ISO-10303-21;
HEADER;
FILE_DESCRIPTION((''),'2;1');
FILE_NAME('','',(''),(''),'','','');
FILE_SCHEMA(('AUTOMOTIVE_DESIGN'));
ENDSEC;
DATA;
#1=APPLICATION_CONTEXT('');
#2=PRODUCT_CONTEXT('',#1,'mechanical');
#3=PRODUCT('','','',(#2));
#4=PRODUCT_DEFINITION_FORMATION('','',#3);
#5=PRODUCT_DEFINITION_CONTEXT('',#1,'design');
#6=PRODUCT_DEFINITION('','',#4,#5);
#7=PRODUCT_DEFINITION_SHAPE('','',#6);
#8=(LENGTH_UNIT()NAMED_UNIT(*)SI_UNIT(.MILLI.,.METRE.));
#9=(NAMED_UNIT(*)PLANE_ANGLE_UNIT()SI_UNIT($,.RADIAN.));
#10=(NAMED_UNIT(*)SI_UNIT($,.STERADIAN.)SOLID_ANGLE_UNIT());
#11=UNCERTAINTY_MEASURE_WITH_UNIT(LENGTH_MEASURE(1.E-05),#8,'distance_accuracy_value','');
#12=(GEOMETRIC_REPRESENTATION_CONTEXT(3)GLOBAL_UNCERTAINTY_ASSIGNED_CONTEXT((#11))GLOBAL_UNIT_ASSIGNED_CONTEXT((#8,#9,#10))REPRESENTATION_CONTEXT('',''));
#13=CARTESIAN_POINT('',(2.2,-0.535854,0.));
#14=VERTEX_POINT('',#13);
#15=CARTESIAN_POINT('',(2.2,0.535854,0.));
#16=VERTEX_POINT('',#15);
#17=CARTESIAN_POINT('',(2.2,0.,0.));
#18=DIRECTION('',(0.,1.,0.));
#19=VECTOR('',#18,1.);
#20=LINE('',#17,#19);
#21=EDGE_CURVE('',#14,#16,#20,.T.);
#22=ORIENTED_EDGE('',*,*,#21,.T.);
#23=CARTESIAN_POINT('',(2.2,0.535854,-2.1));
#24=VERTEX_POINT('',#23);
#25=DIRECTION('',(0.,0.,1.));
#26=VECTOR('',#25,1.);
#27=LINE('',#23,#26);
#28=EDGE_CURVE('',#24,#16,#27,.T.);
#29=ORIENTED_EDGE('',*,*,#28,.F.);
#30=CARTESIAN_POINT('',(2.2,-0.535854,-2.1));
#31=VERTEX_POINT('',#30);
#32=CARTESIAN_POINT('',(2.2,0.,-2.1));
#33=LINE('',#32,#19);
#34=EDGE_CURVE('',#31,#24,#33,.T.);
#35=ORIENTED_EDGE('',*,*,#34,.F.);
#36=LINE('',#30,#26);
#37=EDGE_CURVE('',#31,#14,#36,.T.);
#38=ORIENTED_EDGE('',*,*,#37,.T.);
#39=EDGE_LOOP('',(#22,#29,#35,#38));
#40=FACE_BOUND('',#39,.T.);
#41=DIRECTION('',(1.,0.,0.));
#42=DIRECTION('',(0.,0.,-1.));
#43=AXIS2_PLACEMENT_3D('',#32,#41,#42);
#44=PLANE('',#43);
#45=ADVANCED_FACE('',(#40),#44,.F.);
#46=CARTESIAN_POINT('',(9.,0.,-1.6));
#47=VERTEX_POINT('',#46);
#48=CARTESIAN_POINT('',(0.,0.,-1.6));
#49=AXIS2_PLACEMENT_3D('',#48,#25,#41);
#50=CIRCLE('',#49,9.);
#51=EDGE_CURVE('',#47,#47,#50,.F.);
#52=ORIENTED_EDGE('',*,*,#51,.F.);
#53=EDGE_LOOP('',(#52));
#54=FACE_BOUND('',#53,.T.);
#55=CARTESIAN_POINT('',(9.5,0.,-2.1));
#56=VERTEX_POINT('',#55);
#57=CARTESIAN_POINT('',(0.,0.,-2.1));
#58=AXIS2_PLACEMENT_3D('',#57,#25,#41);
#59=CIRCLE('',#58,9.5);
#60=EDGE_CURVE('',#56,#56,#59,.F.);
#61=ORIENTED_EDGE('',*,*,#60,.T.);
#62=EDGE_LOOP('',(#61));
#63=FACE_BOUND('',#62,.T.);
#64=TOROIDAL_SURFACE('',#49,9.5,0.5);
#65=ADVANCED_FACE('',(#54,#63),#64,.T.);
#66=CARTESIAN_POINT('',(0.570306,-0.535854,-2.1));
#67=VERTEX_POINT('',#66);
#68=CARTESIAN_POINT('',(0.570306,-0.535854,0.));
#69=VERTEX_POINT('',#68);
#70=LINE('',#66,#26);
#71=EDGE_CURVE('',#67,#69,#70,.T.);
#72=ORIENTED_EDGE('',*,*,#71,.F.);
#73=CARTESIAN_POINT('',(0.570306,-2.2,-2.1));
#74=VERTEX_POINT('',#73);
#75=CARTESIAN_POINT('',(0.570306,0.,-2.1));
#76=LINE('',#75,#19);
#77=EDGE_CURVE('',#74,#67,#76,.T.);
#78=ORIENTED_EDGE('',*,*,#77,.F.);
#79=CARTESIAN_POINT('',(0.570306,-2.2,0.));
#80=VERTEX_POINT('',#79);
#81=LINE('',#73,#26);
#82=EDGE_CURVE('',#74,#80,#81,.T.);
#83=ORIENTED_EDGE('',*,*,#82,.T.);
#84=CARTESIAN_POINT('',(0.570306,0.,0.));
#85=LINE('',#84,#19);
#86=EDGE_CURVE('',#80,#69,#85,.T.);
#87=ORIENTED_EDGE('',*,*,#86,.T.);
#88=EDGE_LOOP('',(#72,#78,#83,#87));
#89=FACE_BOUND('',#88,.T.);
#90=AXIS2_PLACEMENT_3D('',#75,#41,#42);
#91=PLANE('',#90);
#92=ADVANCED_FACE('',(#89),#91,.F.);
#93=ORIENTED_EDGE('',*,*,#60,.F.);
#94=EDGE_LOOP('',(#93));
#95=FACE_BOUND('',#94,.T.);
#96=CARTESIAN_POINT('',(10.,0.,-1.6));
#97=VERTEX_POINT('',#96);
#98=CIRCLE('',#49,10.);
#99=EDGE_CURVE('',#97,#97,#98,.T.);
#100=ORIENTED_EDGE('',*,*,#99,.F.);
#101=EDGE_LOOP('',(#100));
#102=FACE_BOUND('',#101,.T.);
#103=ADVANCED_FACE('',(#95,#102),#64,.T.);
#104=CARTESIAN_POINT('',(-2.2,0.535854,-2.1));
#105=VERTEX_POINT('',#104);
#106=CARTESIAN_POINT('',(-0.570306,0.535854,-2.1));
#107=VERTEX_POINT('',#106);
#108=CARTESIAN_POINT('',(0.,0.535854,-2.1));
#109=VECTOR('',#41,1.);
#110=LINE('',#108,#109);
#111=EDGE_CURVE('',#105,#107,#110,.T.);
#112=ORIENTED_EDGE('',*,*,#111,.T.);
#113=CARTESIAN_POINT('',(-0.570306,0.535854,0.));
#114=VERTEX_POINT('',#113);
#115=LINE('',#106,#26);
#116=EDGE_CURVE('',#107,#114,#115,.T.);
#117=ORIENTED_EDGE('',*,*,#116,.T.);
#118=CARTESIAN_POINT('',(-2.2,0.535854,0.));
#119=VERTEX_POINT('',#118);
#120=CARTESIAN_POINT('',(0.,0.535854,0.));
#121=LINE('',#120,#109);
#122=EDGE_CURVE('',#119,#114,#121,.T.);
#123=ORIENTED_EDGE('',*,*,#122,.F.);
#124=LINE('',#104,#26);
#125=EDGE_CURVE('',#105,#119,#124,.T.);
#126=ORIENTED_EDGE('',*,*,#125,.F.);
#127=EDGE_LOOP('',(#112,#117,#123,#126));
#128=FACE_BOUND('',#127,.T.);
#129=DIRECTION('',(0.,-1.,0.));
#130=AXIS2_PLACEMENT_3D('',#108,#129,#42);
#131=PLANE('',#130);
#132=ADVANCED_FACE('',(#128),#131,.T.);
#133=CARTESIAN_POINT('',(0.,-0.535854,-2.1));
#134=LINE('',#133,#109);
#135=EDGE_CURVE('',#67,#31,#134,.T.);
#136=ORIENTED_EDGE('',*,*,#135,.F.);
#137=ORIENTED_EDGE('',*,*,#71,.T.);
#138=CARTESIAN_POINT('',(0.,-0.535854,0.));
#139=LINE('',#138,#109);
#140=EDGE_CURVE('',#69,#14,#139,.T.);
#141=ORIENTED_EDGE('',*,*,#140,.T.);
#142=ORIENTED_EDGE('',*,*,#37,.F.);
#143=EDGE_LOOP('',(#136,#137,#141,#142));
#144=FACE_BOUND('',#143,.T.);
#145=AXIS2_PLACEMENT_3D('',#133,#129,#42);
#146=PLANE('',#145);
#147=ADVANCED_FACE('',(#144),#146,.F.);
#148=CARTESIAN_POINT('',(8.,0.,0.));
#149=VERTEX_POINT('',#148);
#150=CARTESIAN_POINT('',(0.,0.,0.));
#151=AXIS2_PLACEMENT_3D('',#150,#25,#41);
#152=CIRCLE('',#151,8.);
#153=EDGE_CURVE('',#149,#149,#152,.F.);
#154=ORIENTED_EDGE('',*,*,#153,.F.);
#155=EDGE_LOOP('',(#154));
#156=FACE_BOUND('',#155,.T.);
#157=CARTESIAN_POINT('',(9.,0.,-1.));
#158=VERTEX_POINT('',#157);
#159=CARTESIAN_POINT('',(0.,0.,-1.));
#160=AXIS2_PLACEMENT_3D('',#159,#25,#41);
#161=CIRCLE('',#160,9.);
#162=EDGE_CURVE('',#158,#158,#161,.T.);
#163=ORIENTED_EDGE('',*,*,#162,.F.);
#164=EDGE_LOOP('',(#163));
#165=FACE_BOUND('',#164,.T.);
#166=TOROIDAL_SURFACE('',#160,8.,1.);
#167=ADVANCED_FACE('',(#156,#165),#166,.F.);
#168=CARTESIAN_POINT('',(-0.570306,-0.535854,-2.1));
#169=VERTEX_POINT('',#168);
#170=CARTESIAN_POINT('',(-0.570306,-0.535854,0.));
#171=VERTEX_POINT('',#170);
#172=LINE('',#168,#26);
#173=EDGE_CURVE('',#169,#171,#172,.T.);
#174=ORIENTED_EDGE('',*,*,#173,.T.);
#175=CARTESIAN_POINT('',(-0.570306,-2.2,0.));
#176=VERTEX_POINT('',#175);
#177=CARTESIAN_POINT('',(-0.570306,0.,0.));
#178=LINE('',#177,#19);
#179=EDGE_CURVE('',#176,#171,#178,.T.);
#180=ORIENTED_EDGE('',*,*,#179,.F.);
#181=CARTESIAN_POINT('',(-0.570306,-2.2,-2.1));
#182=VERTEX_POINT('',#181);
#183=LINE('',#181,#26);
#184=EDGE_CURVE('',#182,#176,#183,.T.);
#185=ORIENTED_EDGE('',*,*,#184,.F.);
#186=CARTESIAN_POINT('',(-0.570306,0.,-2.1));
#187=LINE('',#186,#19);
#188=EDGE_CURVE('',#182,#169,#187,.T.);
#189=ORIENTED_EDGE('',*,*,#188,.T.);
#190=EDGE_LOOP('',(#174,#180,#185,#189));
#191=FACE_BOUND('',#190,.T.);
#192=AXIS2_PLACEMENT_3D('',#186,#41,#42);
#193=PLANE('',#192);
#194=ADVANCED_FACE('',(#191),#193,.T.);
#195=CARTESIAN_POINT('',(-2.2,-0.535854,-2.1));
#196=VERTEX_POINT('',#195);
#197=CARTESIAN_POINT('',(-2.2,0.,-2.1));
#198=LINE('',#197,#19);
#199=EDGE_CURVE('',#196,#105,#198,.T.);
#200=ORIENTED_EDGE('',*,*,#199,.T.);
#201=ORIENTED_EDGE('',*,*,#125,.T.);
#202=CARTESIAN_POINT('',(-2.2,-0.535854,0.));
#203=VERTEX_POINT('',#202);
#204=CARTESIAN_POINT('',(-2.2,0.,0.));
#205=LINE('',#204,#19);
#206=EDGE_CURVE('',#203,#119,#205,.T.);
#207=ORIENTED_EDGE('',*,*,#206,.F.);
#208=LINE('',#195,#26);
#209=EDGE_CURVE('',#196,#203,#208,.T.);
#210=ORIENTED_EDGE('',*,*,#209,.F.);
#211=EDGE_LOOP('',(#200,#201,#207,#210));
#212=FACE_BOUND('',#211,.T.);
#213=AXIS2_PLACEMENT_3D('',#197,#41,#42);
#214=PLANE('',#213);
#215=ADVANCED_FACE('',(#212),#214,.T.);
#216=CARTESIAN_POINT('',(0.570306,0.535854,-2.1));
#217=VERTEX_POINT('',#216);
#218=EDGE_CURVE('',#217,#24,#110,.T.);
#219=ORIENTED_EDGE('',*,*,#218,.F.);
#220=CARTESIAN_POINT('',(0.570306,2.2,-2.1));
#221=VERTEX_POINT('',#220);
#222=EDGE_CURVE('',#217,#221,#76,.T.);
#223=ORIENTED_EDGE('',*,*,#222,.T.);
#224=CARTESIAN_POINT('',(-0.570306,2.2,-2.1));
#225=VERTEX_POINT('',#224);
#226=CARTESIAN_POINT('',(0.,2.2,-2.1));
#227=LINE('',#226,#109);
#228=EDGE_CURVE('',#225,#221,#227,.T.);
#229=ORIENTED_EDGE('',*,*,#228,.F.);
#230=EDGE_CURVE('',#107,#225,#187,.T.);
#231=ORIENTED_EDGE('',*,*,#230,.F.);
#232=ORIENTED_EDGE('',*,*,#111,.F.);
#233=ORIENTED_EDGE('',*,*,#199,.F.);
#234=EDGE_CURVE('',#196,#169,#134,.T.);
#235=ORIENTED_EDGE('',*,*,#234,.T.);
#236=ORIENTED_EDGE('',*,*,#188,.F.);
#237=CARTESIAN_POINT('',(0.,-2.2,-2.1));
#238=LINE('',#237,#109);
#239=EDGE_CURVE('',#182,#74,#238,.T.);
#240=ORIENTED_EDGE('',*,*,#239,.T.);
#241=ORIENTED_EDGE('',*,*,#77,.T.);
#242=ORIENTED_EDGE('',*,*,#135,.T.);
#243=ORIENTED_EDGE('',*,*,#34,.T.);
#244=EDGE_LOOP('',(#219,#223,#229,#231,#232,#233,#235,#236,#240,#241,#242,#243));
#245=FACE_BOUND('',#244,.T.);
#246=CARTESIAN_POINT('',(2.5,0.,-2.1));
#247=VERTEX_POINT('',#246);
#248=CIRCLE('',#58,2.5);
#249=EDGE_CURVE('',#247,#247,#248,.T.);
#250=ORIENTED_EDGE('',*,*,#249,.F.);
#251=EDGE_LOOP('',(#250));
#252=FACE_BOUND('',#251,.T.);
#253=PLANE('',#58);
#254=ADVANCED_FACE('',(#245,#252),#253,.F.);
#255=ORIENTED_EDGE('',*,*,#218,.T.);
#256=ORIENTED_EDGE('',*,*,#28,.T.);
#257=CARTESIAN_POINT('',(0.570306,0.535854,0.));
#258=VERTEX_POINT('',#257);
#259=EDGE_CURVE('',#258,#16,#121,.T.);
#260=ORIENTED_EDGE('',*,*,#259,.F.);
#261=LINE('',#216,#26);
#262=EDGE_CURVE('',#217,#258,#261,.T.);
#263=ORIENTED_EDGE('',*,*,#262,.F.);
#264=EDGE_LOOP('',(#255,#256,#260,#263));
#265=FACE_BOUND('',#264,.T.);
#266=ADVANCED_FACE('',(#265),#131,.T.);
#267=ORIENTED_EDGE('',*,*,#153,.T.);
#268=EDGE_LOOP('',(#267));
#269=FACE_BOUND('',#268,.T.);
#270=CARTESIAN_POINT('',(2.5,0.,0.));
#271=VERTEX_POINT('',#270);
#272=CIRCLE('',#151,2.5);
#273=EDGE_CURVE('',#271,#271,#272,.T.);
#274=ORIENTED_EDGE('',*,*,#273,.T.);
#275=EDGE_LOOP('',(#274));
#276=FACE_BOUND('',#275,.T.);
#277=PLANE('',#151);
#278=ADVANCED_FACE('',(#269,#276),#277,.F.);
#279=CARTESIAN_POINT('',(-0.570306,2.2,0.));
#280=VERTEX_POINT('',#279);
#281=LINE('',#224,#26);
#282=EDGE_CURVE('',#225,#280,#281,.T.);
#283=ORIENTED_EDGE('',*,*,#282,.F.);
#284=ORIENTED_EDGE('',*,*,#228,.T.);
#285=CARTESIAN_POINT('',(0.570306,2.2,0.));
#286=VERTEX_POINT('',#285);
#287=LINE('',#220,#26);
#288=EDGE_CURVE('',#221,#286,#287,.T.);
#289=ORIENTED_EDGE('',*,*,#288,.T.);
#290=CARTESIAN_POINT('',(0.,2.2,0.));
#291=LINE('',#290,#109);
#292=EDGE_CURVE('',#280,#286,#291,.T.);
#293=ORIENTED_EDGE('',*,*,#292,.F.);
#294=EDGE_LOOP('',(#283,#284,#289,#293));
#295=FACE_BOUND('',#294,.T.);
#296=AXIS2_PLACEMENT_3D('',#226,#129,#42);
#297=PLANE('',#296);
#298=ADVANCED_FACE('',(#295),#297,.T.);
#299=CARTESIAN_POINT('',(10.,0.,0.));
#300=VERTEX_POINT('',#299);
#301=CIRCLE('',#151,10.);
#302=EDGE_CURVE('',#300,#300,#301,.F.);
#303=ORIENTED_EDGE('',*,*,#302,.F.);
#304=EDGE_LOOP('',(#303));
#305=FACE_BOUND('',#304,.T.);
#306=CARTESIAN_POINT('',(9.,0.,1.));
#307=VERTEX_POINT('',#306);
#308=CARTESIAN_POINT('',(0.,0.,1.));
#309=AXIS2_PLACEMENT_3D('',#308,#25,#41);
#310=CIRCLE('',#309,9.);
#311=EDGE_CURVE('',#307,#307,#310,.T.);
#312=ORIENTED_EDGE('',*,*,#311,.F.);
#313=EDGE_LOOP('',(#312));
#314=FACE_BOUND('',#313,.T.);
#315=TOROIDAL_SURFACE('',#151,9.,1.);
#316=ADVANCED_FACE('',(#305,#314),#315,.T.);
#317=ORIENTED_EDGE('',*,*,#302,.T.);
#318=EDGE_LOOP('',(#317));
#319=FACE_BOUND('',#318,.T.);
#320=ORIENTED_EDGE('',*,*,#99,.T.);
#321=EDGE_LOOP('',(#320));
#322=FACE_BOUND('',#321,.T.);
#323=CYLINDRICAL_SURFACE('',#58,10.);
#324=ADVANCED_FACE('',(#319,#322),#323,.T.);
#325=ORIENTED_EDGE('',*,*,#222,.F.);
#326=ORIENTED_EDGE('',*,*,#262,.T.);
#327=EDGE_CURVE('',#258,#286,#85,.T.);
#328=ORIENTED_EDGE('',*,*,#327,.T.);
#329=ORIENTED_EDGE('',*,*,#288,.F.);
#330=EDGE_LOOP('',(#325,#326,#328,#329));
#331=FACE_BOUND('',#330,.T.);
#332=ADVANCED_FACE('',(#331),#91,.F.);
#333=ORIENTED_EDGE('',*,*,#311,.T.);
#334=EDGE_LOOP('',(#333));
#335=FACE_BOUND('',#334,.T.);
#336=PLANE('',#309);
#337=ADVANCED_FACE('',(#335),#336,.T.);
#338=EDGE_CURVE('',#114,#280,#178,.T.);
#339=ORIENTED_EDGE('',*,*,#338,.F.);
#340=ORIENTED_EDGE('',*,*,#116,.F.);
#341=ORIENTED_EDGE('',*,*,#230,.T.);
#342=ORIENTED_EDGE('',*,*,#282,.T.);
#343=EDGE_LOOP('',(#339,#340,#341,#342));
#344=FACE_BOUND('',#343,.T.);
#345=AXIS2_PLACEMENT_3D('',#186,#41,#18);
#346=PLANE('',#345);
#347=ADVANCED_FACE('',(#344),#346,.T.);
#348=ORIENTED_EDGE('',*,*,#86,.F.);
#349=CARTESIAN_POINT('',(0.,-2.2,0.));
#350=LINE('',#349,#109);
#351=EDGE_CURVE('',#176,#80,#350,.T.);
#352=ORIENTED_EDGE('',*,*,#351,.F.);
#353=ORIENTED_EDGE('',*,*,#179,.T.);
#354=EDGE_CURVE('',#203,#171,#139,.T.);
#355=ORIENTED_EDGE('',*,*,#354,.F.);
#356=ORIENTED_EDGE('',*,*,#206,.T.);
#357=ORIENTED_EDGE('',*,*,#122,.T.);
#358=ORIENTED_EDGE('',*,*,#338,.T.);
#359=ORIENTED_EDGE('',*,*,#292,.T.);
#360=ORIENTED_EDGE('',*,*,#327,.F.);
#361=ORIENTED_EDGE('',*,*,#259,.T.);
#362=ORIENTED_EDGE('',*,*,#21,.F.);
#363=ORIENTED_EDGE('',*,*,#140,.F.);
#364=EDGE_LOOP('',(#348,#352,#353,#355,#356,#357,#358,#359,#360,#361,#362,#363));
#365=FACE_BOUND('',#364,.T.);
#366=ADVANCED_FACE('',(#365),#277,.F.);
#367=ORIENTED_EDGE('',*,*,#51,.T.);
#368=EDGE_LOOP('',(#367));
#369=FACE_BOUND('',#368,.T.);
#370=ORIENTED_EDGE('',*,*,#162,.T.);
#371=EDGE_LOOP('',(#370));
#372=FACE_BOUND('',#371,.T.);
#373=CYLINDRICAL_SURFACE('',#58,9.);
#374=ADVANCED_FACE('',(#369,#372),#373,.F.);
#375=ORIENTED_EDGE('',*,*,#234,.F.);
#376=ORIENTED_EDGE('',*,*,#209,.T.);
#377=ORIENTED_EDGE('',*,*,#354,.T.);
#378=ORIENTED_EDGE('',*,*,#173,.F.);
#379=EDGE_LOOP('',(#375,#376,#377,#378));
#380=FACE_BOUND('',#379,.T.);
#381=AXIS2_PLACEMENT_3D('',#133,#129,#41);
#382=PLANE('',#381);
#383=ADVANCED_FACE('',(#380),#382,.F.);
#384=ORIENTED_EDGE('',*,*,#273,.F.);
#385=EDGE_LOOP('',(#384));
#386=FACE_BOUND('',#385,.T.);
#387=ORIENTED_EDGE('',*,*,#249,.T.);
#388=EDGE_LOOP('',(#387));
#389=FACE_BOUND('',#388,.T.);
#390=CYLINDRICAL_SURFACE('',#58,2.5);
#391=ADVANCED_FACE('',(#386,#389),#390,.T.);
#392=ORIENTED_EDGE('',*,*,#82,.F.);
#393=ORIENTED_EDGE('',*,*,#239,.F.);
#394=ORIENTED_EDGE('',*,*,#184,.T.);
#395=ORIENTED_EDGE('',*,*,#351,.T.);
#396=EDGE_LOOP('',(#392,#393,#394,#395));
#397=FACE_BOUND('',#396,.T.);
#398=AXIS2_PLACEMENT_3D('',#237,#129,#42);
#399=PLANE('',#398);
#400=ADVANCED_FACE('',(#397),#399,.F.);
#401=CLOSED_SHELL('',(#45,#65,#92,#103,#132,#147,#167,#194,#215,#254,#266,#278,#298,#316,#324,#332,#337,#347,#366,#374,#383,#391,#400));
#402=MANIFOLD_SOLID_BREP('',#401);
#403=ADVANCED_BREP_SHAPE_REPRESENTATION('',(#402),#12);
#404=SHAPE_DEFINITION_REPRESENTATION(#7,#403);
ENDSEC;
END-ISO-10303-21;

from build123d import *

# Parameters (mm, degrees)
SKETCH_1_R            = 2.5
EXTRUDE_19_DEPTH      = 2.1
EXTRUDE_START         = 1
SKETCH_1_24_R         = 9
SKETCH_1_24_R_2       = 2.5
EXTRUDE_20_DEPTH      = 1
EXTRUDE_21_DEPTH      = 1
EXTRUDE_21_DEPTH_BACK = 2.1
SKETCH_1_25_R         = 10
SKETCH_1_25_R_2       = 9
FILLET_1_R            = 1
FILLET_2_R            = 0.5
FILLET_3_R            = 0.5
FILLET_4_R            = 1


with BuildPart() as part:
    # 草图1 → 凸台-拉伸19 (new body)
    with BuildSketch(Plane.XY):
        Circle(SKETCH_1_R)
        Polygon((0.57030636, 0.535854496), (0.57030636, 2.2), (-0.57030636, 2.2), (-0.57030636, 0.535854496), (-2.2, 0.535854496), (-2.2, -0.535854496), (-0.57030636, -0.535854496), (-0.57030636, -2.2), (0.57030636, -2.2), (0.57030636, -0.535854496), (2.2, -0.535854496), (2.2, 0.535854496), align=None, mode=Mode.SUBTRACT)
    extrude(amount=-EXTRUDE_19_DEPTH)

    # 草图1<24> → 凸台-拉伸20 (add)
    # profile 1 of 4: a face of its own
    with BuildSketch(Plane.XY.offset(EXTRUDE_START)):
        Circle(SKETCH_1_24_R)
        Circle(SKETCH_1_24_R_2, mode=Mode.SUBTRACT)
    # profile 2 of 4: a face of its own
    with BuildSketch(Plane.XY.offset(EXTRUDE_START)):
        Circle(SKETCH_1_24_R_2)
        Polygon((0.57030636, 0.535854496), (0.57030636, 2.2), (-0.57030636, 2.2), (-0.57030636, 0.535854496), (-2.2, 0.535854496), (-2.2, -0.535854496), (-0.57030636, -0.535854496), (-0.57030636, -2.2), (0.57030636, -2.2), (0.57030636, -0.535854496), (2.2, -0.535854496), (2.2, 0.535854496), align=None, mode=Mode.SUBTRACT)
    # profile 3 of 4: a face of its own
    with BuildSketch(Plane.XY.offset(EXTRUDE_START)):
        Polygon((0.57030636, 0.535854496), (2.2, 0.535854496), (2.2, -0.535854496), (0.57030636, -0.535854496), (0.57030636, -2.2), (-0.57030636, -2.2), (-0.57030636, -0.535854496), (-2.2, -0.535854496), (-2.2, 0.535854496), (-0.57030636, 0.535854496), (-0.57030636, 2.2), (0.57030636, 2.2), align=None)
        Polygon((0.37030636, -0.335854496), (2, -0.335854496), (2, 0.335854496), (0.37030636, 0.335854496), (0.37030636, 2), (-0.37030636, 2), (-0.37030636, 0.335854496), (-2, 0.335854496), (-2, -0.335854496), (-0.37030636, -0.335854496), (-0.37030636, -2), (0.37030636, -2), align=None, mode=Mode.SUBTRACT)
    # profile 4 of 4: a face of its own
    with BuildSketch(Plane.XY.offset(EXTRUDE_START)):
        Polygon((0.37030636, -2), (0.37030636, -0.335854496), (2, -0.335854496), (2, 0.335854496), (0.37030636, 0.335854496), (0.37030636, 2), (-0.37030636, 2), (-0.37030636, 0.335854496), (-2, 0.335854496), (-2, -0.335854496), (-0.37030636, -0.335854496), (-0.37030636, -2), align=None)
    extrude(amount=-EXTRUDE_20_DEPTH)

    # 草图1<25> → 凸台-拉伸21 (add, two sides: drawn at the far end of the back side and taken through both)
    with BuildSketch(Plane.XY.offset(-EXTRUDE_21_DEPTH_BACK)):
        Circle(SKETCH_1_25_R)
        Circle(SKETCH_1_25_R_2, mode=Mode.SUBTRACT)
    extrude(amount=EXTRUDE_21_DEPTH + EXTRUDE_21_DEPTH_BACK)

    # 圆角1
    fillet_1_edges = [part.edges().sort_by_distance(p)[0] for p in [
        (-10, 0, 1),
    ]]
    fillet(fillet_1_edges, radius=FILLET_1_R - 0.0001)  # a hair under: the kernel refuses the full size

    # 圆角2
    fillet_2_edges = [part.edges().sort_by_distance(p)[0] for p in [
        (-10, 0, -2.1),
    ]]
    fillet(fillet_2_edges, radius=FILLET_2_R)

    # 圆角3
    fillet_3_edges = [part.edges().sort_by_distance(p)[0] for p in [
        (-9, 0, -2.1),
    ]]
    fillet(fillet_3_edges, radius=FILLET_3_R - 0.0001)  # a hair under: the kernel refuses the full size

    # 圆角4
    fillet_4_edges = [part.edges().sort_by_distance(p)[0] for p in [
        (-9, 0, 0),
    ]]
    fillet(fillet_4_edges, radius=FILLET_4_R)


solid = part.part
